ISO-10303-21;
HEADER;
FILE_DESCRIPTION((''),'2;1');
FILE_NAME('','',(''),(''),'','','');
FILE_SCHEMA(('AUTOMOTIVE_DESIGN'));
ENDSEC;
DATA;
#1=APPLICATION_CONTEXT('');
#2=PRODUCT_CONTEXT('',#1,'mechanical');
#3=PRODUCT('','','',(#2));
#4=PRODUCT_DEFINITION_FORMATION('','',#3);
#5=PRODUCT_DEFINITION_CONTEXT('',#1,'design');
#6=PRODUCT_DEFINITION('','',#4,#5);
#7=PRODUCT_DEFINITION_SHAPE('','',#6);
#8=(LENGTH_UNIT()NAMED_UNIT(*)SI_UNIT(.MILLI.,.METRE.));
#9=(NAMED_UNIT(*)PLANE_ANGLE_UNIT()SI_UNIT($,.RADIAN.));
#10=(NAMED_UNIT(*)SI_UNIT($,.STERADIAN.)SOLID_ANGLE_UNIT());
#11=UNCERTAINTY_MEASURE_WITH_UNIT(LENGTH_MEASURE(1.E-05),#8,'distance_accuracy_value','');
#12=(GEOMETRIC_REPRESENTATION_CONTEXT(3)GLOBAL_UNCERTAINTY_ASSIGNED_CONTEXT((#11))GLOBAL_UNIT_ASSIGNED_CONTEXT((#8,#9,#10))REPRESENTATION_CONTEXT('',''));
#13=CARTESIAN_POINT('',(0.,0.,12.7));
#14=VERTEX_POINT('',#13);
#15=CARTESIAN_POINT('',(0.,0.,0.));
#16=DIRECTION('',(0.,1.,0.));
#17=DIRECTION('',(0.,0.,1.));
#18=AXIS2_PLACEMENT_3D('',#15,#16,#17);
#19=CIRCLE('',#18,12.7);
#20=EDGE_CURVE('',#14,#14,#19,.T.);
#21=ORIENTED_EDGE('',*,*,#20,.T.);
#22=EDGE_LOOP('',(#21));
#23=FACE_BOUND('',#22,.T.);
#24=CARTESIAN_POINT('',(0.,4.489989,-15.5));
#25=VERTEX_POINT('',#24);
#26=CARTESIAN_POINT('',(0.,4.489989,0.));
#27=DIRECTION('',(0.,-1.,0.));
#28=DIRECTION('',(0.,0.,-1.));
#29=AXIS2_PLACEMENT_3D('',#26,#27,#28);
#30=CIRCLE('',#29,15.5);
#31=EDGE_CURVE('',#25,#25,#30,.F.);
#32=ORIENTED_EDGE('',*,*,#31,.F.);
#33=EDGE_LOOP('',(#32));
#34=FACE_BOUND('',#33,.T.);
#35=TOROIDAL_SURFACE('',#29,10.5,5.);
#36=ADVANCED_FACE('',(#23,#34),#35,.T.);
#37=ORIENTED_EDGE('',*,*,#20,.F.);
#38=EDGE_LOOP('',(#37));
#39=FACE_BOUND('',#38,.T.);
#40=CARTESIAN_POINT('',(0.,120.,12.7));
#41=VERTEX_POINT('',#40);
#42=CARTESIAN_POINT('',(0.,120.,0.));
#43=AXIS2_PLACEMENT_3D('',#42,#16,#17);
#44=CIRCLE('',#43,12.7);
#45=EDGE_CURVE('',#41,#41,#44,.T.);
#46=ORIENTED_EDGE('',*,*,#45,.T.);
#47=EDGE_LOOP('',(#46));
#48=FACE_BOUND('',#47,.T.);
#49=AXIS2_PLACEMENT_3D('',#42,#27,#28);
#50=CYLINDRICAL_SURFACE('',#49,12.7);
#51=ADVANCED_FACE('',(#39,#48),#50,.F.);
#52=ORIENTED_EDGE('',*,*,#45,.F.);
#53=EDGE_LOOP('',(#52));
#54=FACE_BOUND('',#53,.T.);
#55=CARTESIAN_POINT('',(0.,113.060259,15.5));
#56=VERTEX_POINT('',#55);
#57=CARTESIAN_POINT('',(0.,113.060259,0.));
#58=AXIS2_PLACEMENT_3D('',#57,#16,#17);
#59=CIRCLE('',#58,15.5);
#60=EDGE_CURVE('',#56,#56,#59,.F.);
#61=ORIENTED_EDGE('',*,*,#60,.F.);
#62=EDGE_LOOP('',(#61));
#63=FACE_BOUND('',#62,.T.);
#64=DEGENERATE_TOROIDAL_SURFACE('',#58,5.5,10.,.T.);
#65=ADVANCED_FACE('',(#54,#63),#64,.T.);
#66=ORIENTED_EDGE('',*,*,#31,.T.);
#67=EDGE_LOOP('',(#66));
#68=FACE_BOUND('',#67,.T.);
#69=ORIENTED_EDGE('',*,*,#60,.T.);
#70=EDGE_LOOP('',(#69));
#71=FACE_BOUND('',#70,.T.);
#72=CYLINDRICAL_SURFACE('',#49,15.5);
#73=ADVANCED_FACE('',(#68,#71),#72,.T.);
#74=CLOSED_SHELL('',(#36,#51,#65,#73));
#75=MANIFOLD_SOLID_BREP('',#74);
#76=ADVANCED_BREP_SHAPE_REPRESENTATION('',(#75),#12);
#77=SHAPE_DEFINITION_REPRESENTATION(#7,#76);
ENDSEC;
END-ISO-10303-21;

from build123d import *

# Parameters (mm, degrees)
SKETCH3_R           = 15.5
SKETCH3_R_2         = 12.7
BOSS_EXTRUDE5_DEPTH = 120
FILLET5_R           = 10
FILLET6_R           = 5


with BuildPart() as part:
    # Sketch3 → Boss-Extrude5 (new body)
    with BuildSketch(Plane(origin=(0, 0, 0), x_dir=(1, 0, 0), z_dir=(0, 1, 0))):
        with Locations(Location((0, 0, 0), (0, 0, 270))):
            Circle(SKETCH3_R)
        with Locations(Location((0, 0, 0), (0, 0, 270))):
            Circle(SKETCH3_R_2, mode=Mode.SUBTRACT)
    extrude(amount=BOSS_EXTRUDE5_DEPTH)

    # Fillet5
    # the kernel refuses this fillet: 10 mm, written as the material it takes off along each edge
    with BuildSketch(Plane(origin=(0, 120, 0), x_dir=(0, 0, 1), z_dir=(-1, 0, 0))) as fillet5_piece_1:
        with BuildLine():
            CenterArc((5.5, -6.939740629), FILLET5_R, 0, 43.945519562)
            Line((12.7, 0), (12.844, 0.138794813))
            ThreePointArc((12.844, 0.138794813), (14.1, 0.2), (15.5, 0.2))
            Line((15.5, 0.2), (15.7, 0))
            Line((15.7, 0), (15.7, -6.939740629))
            Line((15.7, -6.939740629), (15.5, -6.939740629))
        make_face()
    revolve(axis=Axis((0, 120, 0), (0, 1, 0)), mode=Mode.SUBTRACT)

    # Fillet6
    # the kernel refuses this fillet: 5 mm, written as the material it takes off along each edge
    with BuildSketch(Plane(origin=(0, 0, 0), x_dir=(0, 0, 1), z_dir=(-1, 0, 0))) as fillet6_piece_1:
        with BuildLine():
            CenterArc((10.5, 4.489988864), FILLET6_R, 296.103881137, 63.896118863)
            Line((12.7, 0), (12.744, -0.089799777))
            ThreePointArc((12.744, -0.089799777), (14.1, -0.1), (15.5, -0.1))
            Line((15.5, -0.1), (15.6, 0))
            Line((15.6, 0), (15.6, 4.489988864))
            Line((15.6, 4.489988864), (15.5, 4.489988864))
        make_face()
    revolve(axis=Axis((0, 0, 0), (0, 1, 0)), mode=Mode.SUBTRACT)


solid = part.part
